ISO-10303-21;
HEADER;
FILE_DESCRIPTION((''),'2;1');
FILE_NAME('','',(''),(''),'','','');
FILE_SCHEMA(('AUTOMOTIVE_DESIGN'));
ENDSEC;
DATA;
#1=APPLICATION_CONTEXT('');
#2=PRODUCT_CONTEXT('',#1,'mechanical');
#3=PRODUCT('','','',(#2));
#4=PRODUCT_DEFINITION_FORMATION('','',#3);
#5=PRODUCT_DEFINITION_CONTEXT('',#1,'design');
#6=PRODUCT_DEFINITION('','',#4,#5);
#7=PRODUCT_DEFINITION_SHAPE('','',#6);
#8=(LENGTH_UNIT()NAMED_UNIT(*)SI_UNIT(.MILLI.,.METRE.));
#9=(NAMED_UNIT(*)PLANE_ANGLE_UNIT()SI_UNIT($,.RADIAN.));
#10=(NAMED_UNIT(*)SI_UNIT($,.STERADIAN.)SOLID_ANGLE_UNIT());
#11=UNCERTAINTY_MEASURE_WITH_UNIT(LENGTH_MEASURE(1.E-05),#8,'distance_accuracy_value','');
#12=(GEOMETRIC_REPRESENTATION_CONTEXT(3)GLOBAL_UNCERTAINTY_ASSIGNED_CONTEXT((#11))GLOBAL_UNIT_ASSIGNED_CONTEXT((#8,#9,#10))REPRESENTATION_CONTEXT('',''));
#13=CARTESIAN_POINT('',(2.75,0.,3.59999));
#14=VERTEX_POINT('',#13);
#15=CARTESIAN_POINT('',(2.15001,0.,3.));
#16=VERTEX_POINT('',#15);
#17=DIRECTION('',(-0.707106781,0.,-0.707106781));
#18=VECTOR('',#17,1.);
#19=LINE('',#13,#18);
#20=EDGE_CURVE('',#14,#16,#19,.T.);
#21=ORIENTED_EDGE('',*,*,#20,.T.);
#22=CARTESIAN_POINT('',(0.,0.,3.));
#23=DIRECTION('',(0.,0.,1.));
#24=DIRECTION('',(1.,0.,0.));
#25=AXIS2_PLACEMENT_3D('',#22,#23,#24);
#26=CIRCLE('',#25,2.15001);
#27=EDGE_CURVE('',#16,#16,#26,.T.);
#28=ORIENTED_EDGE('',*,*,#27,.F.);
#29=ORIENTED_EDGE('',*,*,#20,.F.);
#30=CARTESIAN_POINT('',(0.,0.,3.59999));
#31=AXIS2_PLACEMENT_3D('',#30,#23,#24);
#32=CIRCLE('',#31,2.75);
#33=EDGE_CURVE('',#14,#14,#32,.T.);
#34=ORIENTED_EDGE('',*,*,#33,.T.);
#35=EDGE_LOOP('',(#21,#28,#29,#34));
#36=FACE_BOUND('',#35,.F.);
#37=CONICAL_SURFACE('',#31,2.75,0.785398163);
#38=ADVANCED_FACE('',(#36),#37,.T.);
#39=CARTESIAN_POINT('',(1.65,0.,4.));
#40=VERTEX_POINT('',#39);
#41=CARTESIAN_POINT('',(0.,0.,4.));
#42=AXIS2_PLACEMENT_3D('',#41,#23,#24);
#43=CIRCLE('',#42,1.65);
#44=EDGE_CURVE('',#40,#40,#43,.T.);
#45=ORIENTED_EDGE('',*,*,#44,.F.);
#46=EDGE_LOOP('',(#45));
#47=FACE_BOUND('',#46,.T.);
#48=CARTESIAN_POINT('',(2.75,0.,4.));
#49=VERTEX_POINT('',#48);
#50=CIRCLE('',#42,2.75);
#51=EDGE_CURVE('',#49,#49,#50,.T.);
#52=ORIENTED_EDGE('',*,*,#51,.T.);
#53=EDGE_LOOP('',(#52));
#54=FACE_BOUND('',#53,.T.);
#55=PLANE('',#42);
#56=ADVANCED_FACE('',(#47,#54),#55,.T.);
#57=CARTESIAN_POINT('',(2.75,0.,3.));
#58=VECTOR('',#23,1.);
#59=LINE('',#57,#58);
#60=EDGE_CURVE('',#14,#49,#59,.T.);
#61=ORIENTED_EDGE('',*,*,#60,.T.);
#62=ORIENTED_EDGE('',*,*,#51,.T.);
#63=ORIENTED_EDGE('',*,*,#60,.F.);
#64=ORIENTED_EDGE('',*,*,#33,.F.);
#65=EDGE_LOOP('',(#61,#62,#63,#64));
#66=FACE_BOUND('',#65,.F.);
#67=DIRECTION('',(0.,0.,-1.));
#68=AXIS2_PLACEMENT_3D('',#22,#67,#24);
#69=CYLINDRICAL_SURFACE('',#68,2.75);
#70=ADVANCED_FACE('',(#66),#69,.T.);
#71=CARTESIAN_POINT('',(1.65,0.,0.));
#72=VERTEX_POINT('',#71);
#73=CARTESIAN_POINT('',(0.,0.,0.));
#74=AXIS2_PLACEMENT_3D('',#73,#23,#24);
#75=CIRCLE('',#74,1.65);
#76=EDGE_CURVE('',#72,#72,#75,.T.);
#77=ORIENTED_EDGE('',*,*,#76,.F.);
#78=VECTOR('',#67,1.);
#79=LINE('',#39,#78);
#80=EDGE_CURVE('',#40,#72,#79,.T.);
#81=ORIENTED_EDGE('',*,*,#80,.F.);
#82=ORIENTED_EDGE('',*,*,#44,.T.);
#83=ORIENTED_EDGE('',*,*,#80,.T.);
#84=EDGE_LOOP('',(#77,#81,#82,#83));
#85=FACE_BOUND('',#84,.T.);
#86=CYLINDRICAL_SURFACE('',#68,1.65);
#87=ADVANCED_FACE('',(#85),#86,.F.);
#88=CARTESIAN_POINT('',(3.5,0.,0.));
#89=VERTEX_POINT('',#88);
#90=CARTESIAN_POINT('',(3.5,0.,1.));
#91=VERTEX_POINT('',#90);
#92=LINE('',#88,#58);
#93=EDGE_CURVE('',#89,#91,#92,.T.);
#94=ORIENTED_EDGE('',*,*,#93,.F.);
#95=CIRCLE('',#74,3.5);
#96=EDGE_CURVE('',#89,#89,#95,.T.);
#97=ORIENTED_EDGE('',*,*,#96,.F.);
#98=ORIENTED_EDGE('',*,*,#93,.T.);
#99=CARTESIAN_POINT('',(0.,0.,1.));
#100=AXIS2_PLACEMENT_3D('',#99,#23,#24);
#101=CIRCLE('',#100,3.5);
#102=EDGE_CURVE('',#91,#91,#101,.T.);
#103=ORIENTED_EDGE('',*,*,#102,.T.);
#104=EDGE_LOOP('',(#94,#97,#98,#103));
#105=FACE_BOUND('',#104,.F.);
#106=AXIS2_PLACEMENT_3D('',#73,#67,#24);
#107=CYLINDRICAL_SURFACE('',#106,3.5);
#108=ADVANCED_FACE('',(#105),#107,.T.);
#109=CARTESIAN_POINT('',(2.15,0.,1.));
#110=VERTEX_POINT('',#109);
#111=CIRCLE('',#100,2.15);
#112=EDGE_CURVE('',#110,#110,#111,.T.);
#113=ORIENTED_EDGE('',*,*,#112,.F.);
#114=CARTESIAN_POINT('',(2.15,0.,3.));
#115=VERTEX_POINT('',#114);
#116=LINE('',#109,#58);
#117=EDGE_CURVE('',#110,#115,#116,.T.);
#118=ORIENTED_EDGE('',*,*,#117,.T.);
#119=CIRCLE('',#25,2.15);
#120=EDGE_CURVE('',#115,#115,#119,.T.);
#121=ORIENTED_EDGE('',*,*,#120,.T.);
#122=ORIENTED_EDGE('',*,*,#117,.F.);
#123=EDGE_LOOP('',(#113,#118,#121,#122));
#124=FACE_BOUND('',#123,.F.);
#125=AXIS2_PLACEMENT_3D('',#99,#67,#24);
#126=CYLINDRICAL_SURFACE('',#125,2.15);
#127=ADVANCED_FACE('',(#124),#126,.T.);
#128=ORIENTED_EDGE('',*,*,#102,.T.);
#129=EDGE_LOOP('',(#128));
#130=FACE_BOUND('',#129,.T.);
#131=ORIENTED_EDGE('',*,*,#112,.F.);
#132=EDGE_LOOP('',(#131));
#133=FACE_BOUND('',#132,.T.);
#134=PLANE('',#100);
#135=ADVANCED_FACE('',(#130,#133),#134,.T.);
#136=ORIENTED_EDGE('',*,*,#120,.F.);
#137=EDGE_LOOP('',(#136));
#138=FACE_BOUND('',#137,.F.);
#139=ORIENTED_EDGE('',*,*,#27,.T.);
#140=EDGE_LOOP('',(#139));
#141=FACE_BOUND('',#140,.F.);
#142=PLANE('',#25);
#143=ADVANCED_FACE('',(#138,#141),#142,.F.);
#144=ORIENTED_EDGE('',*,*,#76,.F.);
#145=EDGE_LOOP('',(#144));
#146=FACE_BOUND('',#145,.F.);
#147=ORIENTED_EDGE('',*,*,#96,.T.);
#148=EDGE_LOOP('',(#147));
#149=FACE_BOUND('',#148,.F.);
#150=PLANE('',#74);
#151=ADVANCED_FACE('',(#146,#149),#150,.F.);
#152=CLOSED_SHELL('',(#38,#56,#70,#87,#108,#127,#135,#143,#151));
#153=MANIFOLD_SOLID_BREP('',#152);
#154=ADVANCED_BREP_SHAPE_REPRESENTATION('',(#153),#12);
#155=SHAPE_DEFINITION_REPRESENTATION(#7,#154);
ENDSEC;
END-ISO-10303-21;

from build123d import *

# Parameters (mm, degrees)
F0_R     = 3.5
F0_R_2   = 2.15
F0_R_3   = 1.65
F1_DEPTH = 1
F2_R     = 2.15
F2_R_2   = 1.65
F3_DEPTH = 2
F4_R     = 2.75
F4_R_2   = 2.15
F4_R_3   = 1.65
F5_DEPTH = 1
F6_SIZE  = 0.59999


# Not quite as in the source:
# - a fillet or chamfer is up to 0.001 mm smaller than in the source, because OpenCascade refuses the exact size


with BuildPart() as f1:
    # F0 (on Top) → F1 (new body)
    with BuildSketch(Plane.XY):
        Circle(F0_R)
        Circle(F0_R_2, mode=Mode.SUBTRACT)
        Circle(F0_R_2)
        Circle(F0_R_3, mode=Mode.SUBTRACT)
    extrude(amount=F1_DEPTH)

    # F2 (on face) → F3 (join)
    with BuildSketch(Plane.XY.offset(1)):
        Circle(F2_R)
        Circle(F2_R_2, mode=Mode.SUBTRACT)
    extrude(amount=F3_DEPTH)

    # F4 (on face) → F5 (join)
    with BuildSketch(Plane.XY.offset(3)):
        Circle(F4_R)
        Circle(F4_R_2, mode=Mode.SUBTRACT)
        Circle(F4_R_2)
        Circle(F4_R_3, mode=Mode.SUBTRACT)
    extrude(amount=F5_DEPTH)

    # F6 (size 0.6 in the source; OpenCascade refuses exactly that, so slightly less here)
    f6_edges = [f1.edges().sort_by_distance(p)[0] for p in [
        (-2.75, 0, 3),
    ]]
    chamfer(f6_edges, length=F6_SIZE)


solid = f1.part
